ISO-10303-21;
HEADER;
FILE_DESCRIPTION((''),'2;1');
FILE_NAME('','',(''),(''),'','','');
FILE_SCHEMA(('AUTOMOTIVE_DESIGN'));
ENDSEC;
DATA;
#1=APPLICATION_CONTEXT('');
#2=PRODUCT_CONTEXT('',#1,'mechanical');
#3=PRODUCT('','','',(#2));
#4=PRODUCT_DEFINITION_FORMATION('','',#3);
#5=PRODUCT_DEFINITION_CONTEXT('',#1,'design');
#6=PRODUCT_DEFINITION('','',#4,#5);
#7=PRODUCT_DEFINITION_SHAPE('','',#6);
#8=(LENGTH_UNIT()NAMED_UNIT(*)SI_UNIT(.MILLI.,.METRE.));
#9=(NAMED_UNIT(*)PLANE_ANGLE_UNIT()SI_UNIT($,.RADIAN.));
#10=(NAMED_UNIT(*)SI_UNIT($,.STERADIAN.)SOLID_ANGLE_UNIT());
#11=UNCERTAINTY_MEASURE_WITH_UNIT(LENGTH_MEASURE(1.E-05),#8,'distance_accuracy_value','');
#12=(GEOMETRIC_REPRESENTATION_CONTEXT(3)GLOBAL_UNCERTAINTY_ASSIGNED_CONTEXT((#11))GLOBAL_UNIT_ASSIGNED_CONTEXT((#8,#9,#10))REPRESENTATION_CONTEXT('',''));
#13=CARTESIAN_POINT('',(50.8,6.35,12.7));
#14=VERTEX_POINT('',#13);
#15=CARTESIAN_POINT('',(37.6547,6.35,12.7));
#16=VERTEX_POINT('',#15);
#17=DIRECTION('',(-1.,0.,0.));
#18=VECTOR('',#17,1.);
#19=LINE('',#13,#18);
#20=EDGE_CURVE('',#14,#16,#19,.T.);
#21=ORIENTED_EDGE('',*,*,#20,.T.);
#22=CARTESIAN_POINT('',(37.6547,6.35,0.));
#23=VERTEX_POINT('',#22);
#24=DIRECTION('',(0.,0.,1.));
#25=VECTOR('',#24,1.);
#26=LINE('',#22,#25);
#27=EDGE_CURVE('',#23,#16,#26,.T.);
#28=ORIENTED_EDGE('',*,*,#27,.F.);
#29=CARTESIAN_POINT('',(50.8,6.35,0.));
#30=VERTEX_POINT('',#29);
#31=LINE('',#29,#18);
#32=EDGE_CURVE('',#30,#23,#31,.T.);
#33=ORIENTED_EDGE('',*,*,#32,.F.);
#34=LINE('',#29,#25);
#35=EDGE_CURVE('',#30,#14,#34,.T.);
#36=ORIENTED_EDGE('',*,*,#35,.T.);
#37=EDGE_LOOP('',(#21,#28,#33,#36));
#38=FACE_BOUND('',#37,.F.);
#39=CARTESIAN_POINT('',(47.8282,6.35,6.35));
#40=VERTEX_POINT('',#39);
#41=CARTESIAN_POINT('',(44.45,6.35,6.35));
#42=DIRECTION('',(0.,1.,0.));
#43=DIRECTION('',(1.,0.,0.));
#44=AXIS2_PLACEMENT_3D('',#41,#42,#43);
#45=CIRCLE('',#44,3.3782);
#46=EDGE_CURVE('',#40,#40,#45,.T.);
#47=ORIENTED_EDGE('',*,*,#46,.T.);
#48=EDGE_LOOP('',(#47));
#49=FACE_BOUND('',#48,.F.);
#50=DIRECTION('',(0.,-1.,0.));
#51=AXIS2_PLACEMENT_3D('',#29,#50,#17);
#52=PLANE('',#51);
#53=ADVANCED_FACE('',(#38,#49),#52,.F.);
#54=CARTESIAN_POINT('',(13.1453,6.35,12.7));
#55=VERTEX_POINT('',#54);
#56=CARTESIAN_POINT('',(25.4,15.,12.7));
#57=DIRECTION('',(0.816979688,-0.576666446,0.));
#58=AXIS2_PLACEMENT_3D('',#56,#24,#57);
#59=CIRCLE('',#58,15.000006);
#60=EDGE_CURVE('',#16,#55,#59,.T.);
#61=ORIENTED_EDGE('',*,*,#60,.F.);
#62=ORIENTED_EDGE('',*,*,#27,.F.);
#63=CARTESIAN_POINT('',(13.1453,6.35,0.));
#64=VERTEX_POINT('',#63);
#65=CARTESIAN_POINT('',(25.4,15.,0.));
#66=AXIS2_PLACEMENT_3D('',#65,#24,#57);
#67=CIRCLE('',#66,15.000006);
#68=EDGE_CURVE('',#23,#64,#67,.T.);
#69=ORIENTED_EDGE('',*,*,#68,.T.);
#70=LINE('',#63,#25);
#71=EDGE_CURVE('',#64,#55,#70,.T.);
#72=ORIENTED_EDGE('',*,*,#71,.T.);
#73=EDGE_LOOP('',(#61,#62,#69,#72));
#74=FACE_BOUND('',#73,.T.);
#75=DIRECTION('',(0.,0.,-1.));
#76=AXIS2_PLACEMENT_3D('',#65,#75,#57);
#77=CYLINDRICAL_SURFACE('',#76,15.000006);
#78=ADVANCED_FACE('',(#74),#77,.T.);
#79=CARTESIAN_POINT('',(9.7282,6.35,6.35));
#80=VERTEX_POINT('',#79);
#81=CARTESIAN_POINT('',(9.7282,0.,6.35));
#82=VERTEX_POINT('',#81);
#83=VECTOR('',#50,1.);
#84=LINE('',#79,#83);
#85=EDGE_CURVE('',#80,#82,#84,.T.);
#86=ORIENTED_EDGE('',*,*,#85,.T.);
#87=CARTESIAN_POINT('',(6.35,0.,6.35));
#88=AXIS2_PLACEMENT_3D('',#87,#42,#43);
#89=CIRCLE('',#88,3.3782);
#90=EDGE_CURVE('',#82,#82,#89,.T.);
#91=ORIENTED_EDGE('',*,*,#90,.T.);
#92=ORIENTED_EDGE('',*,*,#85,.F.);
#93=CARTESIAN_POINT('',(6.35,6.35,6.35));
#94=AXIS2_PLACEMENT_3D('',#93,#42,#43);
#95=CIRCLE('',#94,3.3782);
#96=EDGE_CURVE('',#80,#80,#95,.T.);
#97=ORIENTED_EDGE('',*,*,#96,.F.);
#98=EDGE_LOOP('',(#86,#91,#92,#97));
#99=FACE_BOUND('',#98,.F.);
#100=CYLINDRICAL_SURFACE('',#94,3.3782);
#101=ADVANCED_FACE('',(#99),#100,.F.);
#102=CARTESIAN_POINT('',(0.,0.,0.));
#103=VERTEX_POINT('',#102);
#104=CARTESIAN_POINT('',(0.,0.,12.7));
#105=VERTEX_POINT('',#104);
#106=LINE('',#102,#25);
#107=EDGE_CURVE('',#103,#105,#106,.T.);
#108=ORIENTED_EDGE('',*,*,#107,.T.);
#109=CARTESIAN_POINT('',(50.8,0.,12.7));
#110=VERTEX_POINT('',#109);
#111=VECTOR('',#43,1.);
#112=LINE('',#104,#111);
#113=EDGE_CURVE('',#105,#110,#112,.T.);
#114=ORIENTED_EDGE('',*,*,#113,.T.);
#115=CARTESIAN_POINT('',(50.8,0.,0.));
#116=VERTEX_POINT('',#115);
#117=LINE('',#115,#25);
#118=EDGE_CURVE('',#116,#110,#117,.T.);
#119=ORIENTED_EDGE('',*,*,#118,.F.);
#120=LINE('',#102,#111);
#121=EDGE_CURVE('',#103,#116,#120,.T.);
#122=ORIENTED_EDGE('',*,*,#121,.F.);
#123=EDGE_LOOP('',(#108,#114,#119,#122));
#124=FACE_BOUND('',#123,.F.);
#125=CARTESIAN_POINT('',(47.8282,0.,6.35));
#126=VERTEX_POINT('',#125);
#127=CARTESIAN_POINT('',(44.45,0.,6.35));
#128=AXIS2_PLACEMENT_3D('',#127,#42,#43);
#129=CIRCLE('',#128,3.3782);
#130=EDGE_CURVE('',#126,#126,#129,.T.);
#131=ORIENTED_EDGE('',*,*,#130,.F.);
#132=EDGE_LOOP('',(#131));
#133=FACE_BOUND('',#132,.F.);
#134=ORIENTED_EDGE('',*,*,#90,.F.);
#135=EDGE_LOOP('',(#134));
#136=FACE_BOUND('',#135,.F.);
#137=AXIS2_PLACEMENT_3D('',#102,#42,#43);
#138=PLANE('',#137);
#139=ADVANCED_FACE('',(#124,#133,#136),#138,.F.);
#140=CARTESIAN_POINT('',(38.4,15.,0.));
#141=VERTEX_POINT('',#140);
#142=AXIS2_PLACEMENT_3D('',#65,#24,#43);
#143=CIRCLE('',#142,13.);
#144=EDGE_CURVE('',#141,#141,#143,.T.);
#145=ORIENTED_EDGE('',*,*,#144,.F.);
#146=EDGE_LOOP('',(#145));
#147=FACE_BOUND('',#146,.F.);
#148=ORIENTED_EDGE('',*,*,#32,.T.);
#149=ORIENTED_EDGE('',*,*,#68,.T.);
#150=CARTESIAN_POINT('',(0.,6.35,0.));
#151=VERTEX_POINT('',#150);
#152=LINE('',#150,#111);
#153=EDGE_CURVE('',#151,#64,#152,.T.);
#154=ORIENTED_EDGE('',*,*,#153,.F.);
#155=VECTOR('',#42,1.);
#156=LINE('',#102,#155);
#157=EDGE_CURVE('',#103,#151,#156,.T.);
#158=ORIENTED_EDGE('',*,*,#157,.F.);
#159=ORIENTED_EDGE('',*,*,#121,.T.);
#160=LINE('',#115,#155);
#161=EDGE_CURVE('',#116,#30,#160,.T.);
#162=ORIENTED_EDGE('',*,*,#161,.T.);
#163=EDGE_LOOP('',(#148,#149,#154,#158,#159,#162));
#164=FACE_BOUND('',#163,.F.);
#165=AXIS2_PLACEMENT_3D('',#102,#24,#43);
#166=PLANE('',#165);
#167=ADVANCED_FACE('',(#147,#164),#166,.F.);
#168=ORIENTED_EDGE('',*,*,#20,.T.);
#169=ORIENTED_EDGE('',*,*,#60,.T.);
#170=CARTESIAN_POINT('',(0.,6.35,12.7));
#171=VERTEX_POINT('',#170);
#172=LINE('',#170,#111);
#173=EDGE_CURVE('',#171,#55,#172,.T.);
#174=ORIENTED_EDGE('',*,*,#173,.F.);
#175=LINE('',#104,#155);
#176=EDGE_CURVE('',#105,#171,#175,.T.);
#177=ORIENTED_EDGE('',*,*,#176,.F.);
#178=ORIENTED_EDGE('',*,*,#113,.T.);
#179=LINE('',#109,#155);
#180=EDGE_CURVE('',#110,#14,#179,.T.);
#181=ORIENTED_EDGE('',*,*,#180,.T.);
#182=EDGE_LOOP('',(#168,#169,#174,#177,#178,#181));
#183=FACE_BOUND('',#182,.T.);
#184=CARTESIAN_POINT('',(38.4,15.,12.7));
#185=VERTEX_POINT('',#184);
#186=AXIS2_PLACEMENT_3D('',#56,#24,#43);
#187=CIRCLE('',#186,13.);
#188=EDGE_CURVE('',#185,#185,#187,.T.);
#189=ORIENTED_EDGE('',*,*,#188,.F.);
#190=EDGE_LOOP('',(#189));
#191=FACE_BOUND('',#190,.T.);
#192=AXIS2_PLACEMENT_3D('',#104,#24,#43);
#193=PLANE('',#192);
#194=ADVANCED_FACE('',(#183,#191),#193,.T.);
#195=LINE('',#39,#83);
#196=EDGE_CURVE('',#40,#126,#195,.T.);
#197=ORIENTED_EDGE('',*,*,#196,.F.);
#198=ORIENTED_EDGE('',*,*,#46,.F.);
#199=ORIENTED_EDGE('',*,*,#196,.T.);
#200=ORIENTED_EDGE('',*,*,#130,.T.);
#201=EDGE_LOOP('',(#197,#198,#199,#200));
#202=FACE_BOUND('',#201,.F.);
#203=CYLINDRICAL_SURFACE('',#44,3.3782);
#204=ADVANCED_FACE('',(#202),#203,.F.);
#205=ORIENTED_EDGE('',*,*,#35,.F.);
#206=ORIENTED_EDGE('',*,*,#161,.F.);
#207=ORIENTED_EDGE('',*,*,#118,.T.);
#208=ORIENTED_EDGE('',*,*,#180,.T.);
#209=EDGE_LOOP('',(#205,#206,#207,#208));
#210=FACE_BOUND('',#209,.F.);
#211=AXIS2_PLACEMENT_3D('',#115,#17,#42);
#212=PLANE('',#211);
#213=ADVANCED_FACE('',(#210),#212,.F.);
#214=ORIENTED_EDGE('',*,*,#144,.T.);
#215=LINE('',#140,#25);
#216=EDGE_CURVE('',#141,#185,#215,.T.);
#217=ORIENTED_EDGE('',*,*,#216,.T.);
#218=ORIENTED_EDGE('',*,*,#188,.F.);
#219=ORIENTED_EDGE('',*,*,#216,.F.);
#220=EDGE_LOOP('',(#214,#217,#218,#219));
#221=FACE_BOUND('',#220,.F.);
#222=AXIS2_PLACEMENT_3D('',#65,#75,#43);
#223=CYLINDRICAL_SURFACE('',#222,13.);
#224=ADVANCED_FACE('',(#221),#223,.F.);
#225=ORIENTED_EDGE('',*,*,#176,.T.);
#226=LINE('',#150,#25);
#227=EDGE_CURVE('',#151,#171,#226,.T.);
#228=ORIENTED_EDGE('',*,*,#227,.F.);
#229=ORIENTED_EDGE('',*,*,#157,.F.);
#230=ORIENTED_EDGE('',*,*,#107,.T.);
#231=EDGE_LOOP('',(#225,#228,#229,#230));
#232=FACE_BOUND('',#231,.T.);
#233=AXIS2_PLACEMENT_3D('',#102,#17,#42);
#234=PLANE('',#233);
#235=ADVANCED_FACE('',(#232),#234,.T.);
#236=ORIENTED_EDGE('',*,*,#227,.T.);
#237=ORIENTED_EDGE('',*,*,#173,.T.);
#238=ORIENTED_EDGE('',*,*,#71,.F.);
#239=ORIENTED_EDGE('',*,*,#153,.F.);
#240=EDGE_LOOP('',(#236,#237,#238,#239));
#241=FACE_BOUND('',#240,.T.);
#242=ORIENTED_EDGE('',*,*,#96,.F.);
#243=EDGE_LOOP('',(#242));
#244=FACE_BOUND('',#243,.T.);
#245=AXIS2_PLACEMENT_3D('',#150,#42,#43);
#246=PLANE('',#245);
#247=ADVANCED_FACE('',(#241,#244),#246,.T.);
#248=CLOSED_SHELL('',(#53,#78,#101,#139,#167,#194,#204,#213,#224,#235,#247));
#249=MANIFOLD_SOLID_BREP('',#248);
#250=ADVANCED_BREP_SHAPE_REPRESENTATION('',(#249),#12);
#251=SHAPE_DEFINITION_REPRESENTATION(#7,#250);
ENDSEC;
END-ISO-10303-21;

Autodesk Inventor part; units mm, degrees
ref_plane "YZ Plane" through (0, 0, 0) normal (1, 0, 0) x (0, 1, 0)
ref_plane "XZ Plane" through (0, 0, 0) normal (0, 1, 0) x (-1, 0, 0)
ref_plane "XY Plane" through (0, 0, 0) normal (0, 0, 1) x (1, 0, 0)
sketch "Sketch1" plane through (0, 0, 0) normal (0, 0, 1) x (1, 0, 0)
  line L0 (0, 0) -> (50.8, 0)
  arc A0 (37.6547, 6.35) -> (13.1453, 6.35) centre (25.4, 15) ccw
  circle A1 centre (25.4, 15) radius 13
  line L1 (0, 0) -> (0, 6.35)
  line L2 (0, 6.35) -> (13.1453, 6.35)
  line L3 (50.8, 0) -> (50.8, 6.35)
  line L4 (50.8, 6.35) -> (37.6547, 6.35)
  dimension "d0" = 50.8
  dimension "d1" = 30
  dimension "d2" = 26
  dimension "d3" = 6.35
  dimension "d4" = 6.35
  dimension "d5" = 25.4
extrude "Plate1" add sketch "Sketch1" along normal blind 12.7
sketch "Sketch2" plane through (37.6547, 6.35, 0) normal (0, 1, 0) x (1, 0, 0)
  line L0 (0, -12.7) -> (13.1453, -12.7) projected
  line L1 (13.1453, 0) -> (13.1453, -12.7) projected
  circle A0 centre (6.7953, -6.35) radius 3.3782
  circle A1 centre (-31.3047, -6.35) radius 3.3782
  line L2 (-37.6547, 0) -> (-37.6547, -12.7) projected
  line L3 (-24.5094, 0) -> (-37.6547, 0) projected
  dimension "d7" = 6.7564
  dimension "d8" = 6.7564
  dimension "d9" = 6.35
  dimension "d10" = 6.35
  dimension "d12" = 6.35
  dimension "d13" = 6.35
extrude "Cut1" cut sketch "Sketch2" against normal blind 12.7
equation "\"d14\" = Thickness"
equation "\"BendRadius\" = Thickness"
equation "\"BendReliefWidth\" = Thickness"
equation "\"BendReliefDepth\" = 0.5 * Thickness"
equation "\"CornerReliefSize\" = 4 * Thickness"
equation "\"MinimumRemnant\" = 2 * Thickness"
equation "\"TransitionRadius\" = BendRadius"
equation "\"JacobiRadiusSize\" = BendRadius"
equation "\"GapSize\" = Thickness"
equation "\"d6\" = BendRadius"
equation "\"Thickness\" = 12.7"
properties part number "Pillow block for arm bearing" material "Aluminum 6061"
